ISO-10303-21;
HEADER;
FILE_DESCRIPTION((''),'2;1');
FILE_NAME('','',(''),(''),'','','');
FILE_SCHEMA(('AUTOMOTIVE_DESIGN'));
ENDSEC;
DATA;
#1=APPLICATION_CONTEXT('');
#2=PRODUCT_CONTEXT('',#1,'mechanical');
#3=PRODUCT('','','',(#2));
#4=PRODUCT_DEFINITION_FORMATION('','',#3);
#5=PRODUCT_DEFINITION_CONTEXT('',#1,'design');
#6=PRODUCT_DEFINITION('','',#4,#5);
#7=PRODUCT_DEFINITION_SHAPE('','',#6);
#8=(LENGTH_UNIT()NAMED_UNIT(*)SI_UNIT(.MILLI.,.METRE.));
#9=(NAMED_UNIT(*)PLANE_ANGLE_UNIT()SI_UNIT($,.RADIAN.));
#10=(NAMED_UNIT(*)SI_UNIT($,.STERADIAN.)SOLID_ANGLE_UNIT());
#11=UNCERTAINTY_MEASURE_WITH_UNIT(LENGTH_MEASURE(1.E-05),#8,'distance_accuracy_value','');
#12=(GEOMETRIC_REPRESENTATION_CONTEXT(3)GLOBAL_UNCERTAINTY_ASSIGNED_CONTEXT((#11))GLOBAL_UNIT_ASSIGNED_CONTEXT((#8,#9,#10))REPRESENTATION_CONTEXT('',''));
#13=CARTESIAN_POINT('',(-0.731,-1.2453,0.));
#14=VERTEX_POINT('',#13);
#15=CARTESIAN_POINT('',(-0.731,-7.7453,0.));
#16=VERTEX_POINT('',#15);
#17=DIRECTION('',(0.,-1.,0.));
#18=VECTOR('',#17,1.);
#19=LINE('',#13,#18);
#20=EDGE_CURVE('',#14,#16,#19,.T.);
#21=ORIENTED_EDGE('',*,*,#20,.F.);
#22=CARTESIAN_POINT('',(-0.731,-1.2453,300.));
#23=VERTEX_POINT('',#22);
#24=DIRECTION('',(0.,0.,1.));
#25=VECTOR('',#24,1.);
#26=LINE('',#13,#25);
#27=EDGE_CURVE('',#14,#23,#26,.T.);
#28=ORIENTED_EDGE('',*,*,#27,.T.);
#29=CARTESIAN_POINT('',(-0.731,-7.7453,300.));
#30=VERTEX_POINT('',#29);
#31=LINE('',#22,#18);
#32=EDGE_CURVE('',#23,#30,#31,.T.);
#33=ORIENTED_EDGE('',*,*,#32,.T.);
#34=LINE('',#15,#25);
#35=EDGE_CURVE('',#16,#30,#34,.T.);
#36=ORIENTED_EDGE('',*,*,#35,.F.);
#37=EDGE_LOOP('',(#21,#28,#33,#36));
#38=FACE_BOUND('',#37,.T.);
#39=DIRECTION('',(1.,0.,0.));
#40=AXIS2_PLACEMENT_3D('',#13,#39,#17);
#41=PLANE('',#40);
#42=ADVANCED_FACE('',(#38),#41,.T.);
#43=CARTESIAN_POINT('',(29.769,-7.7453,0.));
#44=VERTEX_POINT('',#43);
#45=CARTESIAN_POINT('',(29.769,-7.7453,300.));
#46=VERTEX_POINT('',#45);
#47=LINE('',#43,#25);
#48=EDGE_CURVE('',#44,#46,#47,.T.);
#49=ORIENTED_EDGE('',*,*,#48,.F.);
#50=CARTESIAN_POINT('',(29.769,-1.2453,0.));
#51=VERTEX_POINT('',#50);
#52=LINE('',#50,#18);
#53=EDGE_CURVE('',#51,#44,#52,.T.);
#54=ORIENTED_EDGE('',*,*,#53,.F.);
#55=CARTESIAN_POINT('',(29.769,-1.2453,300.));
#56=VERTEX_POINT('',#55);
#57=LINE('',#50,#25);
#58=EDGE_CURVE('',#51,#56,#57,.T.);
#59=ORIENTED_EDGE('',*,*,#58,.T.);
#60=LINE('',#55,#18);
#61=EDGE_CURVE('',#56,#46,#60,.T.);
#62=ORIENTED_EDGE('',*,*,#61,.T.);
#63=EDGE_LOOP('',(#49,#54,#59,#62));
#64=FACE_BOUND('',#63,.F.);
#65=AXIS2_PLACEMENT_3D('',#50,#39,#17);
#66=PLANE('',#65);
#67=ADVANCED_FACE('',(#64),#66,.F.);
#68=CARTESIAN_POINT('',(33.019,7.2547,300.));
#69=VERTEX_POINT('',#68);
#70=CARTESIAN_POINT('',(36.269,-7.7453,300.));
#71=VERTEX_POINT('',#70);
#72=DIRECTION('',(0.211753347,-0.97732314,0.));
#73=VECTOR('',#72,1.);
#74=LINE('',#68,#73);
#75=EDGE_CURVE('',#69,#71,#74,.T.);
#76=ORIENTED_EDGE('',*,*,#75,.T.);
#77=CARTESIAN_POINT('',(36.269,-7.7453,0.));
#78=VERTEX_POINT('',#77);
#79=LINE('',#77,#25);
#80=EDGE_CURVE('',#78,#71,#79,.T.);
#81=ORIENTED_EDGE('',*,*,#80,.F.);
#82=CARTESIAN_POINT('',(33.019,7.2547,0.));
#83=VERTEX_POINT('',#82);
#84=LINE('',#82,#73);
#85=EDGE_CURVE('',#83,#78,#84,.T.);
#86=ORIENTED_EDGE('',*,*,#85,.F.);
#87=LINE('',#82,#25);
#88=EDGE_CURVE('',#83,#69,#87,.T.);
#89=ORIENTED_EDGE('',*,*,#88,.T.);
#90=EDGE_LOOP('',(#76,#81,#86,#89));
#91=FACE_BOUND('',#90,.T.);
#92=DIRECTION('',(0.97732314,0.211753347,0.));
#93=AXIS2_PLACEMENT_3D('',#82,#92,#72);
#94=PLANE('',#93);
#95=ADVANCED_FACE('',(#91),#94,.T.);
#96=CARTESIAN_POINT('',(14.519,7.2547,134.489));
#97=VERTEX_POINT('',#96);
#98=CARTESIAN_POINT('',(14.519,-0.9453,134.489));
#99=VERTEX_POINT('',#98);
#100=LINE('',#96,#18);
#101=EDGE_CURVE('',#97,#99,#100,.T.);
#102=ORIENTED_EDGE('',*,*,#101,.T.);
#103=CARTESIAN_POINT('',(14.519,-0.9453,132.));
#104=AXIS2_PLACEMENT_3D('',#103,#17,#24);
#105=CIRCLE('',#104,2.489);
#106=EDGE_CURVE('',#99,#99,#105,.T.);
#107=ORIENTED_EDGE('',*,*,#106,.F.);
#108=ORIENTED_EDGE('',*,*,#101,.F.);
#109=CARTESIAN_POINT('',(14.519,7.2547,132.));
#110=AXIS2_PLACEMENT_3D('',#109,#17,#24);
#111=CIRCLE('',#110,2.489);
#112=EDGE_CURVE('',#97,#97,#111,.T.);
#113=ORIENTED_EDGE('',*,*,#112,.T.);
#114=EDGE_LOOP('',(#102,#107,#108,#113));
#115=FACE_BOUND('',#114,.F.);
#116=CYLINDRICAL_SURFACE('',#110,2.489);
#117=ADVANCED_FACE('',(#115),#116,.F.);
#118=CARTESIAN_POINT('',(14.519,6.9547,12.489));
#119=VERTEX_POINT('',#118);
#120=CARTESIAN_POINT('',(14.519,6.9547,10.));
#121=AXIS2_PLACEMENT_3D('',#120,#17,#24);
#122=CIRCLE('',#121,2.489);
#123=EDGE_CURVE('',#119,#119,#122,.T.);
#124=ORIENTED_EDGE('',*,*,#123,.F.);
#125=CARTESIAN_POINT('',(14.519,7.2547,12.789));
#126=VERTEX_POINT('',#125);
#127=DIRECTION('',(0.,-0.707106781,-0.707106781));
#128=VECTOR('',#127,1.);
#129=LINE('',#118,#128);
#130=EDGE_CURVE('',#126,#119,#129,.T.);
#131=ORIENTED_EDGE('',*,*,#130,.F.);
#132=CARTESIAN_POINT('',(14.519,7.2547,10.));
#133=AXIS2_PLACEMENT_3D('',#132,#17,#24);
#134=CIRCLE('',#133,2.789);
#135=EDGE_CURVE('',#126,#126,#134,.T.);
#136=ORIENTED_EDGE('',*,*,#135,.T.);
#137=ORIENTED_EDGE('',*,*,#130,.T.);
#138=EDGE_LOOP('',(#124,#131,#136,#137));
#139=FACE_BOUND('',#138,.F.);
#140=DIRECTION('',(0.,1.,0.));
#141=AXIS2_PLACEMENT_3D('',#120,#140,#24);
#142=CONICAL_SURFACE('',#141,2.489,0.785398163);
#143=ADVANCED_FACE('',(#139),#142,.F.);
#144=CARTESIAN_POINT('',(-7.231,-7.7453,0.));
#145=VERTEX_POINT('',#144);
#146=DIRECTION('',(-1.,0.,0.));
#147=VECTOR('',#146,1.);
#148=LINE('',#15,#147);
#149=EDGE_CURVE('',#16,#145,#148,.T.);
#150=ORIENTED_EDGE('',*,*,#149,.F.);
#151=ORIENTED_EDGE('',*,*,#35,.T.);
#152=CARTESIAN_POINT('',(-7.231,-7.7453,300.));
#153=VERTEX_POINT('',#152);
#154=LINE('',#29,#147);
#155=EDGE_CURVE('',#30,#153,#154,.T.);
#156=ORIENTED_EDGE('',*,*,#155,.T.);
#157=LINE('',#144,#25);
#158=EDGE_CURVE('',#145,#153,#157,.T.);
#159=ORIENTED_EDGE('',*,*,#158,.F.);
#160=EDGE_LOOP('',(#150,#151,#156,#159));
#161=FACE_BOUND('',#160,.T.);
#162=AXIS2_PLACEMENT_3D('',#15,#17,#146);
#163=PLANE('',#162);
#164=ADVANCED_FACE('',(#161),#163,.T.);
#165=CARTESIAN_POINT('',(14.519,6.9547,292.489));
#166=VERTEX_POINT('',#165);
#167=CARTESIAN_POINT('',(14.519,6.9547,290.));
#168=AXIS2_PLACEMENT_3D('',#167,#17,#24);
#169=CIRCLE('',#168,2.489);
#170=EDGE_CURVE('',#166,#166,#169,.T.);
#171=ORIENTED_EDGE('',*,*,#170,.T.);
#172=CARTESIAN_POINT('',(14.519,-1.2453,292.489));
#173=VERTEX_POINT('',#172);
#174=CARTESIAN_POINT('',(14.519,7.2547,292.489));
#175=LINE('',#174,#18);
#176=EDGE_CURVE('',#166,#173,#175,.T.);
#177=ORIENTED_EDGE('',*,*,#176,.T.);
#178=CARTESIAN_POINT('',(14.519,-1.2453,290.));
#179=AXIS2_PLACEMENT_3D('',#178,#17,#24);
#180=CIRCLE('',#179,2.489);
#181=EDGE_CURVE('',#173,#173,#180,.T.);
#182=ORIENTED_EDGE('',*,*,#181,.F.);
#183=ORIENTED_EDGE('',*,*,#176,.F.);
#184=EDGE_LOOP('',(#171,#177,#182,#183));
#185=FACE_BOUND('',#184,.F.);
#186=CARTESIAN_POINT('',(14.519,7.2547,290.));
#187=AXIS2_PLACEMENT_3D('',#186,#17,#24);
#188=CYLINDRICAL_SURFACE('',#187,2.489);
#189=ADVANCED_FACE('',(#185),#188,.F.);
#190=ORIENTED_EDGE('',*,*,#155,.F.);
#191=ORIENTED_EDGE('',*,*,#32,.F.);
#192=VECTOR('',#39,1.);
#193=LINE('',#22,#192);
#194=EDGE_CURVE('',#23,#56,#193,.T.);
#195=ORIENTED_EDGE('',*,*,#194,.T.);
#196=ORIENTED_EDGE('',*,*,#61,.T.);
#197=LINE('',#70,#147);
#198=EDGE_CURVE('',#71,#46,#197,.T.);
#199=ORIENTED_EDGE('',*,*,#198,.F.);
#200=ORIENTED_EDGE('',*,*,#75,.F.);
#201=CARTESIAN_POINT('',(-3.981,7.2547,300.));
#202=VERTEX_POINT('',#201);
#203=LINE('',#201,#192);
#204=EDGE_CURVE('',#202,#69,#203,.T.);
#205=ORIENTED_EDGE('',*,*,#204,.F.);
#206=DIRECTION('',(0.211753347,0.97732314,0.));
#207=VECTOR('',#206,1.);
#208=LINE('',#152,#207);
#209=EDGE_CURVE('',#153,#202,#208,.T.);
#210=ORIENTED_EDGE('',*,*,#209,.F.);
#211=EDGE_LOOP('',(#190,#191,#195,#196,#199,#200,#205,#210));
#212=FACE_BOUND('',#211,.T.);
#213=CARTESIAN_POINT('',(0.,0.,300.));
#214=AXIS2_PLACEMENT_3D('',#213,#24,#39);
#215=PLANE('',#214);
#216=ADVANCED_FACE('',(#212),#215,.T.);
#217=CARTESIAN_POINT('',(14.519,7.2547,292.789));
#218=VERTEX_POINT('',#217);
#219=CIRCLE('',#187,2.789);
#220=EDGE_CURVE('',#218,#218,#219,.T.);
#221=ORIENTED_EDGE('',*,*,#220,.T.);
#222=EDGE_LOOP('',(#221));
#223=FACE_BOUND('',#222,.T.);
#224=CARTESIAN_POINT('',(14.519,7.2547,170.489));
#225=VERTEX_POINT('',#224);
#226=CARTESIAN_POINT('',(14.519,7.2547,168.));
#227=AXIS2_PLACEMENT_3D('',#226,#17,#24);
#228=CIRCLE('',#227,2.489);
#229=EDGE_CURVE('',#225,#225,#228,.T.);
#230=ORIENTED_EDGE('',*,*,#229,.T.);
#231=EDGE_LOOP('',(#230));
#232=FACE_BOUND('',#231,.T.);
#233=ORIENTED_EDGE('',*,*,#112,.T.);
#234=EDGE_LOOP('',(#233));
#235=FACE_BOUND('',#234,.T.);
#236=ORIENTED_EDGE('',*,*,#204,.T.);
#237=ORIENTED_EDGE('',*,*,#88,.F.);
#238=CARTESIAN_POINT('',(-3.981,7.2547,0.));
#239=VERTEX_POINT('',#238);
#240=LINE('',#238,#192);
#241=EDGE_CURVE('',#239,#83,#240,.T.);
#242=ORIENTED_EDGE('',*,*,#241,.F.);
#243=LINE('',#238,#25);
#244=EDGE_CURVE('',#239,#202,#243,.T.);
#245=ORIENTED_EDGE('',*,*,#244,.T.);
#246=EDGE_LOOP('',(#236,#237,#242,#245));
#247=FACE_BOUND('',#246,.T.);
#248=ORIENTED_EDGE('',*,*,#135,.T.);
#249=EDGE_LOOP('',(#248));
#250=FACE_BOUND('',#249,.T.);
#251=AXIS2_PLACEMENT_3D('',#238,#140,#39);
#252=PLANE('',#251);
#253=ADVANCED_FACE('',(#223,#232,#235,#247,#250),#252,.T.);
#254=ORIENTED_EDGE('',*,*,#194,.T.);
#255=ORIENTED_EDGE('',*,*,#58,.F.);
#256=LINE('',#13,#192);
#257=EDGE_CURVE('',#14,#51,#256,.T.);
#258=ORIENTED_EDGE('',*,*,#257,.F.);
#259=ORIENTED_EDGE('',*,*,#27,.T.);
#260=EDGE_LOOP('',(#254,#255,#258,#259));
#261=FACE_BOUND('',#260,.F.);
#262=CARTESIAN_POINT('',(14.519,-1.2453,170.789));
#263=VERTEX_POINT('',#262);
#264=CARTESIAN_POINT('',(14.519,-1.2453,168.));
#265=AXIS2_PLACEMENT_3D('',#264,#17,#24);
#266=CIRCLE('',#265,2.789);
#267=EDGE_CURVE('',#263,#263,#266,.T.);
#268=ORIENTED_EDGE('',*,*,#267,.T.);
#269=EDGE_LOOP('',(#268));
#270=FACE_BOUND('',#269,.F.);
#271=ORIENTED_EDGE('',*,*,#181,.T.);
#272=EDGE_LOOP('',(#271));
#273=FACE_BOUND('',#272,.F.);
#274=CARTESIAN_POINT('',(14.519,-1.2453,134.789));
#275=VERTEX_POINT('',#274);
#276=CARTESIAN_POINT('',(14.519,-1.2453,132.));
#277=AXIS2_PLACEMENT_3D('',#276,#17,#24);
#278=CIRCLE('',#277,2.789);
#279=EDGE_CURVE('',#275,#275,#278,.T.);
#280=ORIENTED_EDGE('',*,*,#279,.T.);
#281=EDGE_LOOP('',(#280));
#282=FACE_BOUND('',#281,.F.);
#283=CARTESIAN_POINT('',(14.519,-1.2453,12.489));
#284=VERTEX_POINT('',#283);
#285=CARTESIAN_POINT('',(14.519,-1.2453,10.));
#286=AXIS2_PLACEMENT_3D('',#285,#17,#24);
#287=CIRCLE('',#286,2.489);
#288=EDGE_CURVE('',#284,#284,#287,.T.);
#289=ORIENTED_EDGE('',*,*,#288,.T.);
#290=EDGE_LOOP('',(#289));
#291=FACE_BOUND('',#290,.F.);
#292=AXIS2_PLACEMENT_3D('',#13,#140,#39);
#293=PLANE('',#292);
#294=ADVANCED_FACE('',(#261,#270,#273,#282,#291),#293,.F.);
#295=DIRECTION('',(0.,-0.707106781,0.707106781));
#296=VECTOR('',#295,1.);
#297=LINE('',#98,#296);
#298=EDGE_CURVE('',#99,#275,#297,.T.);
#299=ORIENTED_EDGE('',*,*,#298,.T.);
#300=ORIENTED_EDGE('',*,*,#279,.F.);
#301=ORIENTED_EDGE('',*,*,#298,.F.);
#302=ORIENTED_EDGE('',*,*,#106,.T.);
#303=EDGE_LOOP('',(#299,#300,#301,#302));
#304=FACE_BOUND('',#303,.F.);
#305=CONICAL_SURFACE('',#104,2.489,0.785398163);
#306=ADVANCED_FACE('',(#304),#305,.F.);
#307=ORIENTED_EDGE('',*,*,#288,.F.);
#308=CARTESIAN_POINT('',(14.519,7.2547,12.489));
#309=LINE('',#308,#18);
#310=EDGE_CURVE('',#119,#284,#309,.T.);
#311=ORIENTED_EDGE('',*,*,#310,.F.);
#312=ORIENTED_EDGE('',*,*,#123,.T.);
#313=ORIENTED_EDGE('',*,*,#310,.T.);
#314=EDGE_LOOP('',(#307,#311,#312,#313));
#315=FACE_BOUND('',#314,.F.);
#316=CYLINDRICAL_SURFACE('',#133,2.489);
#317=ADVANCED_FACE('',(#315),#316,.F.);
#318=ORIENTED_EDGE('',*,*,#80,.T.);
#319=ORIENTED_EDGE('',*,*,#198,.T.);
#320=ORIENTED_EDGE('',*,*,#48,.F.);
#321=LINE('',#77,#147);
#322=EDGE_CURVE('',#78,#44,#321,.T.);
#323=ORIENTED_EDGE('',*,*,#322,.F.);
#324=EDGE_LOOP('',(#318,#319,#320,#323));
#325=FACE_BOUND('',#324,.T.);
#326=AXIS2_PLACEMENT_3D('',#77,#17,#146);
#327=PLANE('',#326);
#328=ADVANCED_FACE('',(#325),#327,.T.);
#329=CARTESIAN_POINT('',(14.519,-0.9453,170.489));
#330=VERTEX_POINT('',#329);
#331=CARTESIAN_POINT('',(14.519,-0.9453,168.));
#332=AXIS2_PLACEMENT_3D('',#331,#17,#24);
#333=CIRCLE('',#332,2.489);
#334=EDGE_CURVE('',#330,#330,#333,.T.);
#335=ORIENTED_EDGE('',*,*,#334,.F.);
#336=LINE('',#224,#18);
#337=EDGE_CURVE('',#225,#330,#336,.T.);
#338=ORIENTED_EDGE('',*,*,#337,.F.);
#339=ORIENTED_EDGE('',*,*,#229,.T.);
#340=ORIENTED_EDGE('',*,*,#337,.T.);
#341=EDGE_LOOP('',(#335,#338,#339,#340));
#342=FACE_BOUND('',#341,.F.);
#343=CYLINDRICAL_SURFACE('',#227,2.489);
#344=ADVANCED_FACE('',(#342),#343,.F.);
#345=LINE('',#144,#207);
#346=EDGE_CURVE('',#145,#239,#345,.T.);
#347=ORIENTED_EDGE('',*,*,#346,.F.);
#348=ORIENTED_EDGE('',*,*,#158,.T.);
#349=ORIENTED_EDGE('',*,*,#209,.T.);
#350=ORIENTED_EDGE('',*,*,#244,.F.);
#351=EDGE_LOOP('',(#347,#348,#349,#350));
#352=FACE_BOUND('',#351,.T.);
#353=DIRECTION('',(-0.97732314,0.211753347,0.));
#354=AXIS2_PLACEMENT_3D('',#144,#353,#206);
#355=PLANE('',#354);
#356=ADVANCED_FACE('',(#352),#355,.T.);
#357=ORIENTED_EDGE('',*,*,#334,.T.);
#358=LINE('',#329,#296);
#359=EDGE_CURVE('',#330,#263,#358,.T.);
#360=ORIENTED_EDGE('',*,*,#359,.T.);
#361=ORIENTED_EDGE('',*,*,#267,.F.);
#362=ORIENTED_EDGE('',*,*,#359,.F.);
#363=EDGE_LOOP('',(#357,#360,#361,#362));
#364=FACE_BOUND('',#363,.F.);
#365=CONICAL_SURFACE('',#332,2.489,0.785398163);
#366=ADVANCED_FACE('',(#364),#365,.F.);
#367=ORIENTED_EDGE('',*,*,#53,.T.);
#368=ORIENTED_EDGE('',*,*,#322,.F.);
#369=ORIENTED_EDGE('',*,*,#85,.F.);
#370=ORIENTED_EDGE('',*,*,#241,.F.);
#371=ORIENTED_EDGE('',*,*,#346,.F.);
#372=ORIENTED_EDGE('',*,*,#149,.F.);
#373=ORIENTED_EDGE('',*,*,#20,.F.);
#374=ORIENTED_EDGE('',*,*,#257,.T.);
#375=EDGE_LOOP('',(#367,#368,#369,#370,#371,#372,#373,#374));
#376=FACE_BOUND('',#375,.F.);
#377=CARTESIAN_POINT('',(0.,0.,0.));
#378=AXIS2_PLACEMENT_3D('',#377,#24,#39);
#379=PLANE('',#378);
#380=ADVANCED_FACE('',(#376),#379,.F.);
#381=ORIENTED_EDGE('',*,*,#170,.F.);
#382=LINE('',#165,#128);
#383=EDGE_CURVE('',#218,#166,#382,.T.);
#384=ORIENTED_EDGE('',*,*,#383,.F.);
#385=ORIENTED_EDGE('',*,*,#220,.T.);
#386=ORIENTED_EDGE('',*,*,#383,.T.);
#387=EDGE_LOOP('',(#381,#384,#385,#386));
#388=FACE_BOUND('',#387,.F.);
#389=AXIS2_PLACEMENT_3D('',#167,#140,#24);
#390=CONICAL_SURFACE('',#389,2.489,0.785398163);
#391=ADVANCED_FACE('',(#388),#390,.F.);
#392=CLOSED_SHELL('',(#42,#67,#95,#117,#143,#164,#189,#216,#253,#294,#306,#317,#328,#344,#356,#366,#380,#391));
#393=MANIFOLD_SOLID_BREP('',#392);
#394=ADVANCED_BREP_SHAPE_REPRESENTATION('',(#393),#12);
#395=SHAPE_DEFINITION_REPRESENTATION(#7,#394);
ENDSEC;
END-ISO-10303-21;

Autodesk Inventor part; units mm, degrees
ref_plane "YZ Plane" through (0, 0, 0) normal (1, 0, 0) x (0, 1, 0)
ref_plane "XZ Plane" through (0, 0, 0) normal (0, 1, 0) x (-1, 0, 0)
ref_plane "XY Plane" through (0, 0, 0) normal (0, 0, 1) x (1, 0, 0)
sketch "Sketch1" plane through (0, 0, 0) normal (0, 0, 1) x (1, 0, 0)
  line L0 (-3.981, 7.2547) -> (33.019, 7.2547)
  line L1 (33.019, 7.2547) -> (36.269, -7.7453)
  line L2 (-7.231, -7.7453) -> (-3.981, 7.2547)
  line L3 (-0.731, -1.2453) -> (29.769, -1.2453)
  line L4 (29.769, -1.2453) -> (29.769, -7.7453)
  line L5 (-0.731, -1.2453) -> (-0.731, -7.7453)
  line L6 (36.269, -7.7453) -> (29.769, -7.7453)
  line L7 (-0.731, -7.7453) -> (-7.231, -7.7453)
  point P0 (0, 0)
  dimension "d0" = 37
  dimension "d1" = 43.5
  dimension "d4" = 30.5
extrude "Extrusion1" add sketch "Sketch1" along normal blind 300
sketch "Sketch2" plane through (-3.981, 7.2547, 0) normal (0, 1, 0) x (1, 0, 0)
  line L0 (37, -300) -> (0, -300) projected
  line L1 (0, 0) -> (37, 0) projected
  point P0 (3.981, 0)
  point P1 (18.5, -10)
  point P2 (18.5, -132)
  point P3 (18.5, -168)
  point P4 (18.5, -290)
  dimension "d9" = 10
  dimension "d10" = 10
  dimension "d11" = 36
hole "Hole1" at (14.519, 7.2547, 10) at (14.519, 7.2547, 132) at (14.519, 7.2547, 168) at (14.519, 7.2547, 290) direction (0, -1, 0) diameter 4.978 end through all thread size "1/4-20 UNC" class "2B" standard "ANSI Unified Screw Threads"
chamfer "Chamfer1" distance 0.3 angle 45 4 edges at (14.519, 7.2547, 287.511) (14.519, 7.2547, 7.511) (14.519, -1.2453, 129.511) (14.519, -1.2453, 165.511)
properties part number "szyna" material "Stainless Steel"
